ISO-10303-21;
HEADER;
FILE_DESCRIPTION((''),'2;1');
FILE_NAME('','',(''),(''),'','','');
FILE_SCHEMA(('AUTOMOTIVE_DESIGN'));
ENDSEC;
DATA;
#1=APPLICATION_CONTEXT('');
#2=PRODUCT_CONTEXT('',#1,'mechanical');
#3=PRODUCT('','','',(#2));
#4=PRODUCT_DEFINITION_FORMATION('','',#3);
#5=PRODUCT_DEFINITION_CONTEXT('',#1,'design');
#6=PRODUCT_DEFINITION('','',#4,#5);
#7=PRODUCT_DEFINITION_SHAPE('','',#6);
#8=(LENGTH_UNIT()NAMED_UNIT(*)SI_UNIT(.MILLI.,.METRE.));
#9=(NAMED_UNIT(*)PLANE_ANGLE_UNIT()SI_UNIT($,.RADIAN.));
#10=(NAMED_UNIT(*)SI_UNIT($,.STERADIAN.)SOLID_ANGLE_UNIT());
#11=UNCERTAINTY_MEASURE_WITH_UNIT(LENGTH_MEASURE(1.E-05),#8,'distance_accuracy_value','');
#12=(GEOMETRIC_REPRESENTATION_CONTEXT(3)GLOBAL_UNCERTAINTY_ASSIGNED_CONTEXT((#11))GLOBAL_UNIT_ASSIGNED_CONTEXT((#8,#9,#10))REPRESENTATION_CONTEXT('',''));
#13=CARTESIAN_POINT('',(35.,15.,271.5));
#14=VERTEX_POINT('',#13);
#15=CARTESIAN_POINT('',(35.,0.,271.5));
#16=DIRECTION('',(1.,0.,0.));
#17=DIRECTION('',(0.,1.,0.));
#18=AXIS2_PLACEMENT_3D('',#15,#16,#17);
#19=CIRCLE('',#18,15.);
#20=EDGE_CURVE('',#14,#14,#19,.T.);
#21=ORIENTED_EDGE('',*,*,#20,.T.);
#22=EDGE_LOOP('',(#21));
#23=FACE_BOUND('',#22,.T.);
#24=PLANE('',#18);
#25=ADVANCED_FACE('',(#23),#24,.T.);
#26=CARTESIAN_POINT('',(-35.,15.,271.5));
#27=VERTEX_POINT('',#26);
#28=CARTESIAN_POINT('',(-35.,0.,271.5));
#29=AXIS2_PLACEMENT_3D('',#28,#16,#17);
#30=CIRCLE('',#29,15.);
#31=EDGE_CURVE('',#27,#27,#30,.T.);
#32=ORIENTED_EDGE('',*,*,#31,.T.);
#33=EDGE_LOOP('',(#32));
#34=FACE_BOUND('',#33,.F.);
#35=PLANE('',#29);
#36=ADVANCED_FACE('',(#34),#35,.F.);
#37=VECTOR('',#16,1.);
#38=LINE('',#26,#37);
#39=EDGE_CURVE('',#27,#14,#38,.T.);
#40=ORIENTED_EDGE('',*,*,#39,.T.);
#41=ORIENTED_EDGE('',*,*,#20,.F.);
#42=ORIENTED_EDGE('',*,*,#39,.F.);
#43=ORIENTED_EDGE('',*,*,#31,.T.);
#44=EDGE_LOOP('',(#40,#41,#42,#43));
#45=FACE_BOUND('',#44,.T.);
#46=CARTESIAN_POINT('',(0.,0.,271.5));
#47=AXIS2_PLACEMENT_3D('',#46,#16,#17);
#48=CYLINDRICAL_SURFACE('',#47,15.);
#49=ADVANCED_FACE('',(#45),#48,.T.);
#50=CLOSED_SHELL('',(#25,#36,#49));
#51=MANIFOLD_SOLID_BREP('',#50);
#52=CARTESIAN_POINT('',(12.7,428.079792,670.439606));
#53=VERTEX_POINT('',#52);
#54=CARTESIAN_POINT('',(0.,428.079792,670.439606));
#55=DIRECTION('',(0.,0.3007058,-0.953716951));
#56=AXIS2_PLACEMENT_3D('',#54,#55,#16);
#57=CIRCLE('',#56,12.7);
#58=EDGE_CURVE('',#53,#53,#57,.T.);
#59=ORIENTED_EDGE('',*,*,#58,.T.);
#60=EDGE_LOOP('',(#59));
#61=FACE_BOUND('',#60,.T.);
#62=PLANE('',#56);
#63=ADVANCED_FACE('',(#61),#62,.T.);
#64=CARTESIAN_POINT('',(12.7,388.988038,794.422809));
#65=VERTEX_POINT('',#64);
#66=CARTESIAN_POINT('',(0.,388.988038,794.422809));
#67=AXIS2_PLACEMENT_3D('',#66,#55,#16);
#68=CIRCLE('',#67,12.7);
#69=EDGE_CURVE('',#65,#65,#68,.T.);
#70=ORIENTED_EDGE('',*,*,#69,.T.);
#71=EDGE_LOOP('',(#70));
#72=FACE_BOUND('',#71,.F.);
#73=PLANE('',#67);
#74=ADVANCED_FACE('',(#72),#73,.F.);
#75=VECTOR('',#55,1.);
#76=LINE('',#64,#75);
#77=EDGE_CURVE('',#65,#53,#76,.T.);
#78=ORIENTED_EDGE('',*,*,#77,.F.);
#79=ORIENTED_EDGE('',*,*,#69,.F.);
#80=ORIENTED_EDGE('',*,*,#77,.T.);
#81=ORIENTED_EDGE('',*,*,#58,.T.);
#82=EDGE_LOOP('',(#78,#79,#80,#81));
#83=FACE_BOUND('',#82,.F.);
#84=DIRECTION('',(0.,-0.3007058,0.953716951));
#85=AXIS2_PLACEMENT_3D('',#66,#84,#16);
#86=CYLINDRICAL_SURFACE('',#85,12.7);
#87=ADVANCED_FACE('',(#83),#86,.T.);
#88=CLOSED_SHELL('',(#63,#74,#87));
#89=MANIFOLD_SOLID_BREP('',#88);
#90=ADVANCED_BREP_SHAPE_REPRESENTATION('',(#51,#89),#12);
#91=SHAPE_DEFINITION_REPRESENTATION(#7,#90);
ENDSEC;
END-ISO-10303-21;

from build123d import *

# Parameters (mm, degrees)
F4_R      = 15
F7_DEPTH  = 35
F9_R      = 12.7
F10_DEPTH = 130


# Not quite as in the source:
# - the program builds the solid bodies; features that only make, move or delete a surface that nothing else refers to are left out


with BuildPart() as f7:
    # F4 (on Right) → F7 (new body, symmetric)
    with BuildSketch(Plane.YZ):
        with Locations((0, 271.5)):
            Circle(F4_R)
    extrude(amount=F7_DEPTH, both=True)


with BuildPart() as f10:
    # F9 (on line) → F10 (new body, through all)
    with BuildSketch(Plane(origin=(0, -192.657256288, 611.0307526806), x_dir=(1, 0, 0), z_dir=(0, 0.3007057995, -0.9537169507))):
        with Locations((0, -609.872031448)):
            Circle(F9_R)
    extrude(amount=F10_DEPTH)


solid = Compound([f7.part, f10.part])
